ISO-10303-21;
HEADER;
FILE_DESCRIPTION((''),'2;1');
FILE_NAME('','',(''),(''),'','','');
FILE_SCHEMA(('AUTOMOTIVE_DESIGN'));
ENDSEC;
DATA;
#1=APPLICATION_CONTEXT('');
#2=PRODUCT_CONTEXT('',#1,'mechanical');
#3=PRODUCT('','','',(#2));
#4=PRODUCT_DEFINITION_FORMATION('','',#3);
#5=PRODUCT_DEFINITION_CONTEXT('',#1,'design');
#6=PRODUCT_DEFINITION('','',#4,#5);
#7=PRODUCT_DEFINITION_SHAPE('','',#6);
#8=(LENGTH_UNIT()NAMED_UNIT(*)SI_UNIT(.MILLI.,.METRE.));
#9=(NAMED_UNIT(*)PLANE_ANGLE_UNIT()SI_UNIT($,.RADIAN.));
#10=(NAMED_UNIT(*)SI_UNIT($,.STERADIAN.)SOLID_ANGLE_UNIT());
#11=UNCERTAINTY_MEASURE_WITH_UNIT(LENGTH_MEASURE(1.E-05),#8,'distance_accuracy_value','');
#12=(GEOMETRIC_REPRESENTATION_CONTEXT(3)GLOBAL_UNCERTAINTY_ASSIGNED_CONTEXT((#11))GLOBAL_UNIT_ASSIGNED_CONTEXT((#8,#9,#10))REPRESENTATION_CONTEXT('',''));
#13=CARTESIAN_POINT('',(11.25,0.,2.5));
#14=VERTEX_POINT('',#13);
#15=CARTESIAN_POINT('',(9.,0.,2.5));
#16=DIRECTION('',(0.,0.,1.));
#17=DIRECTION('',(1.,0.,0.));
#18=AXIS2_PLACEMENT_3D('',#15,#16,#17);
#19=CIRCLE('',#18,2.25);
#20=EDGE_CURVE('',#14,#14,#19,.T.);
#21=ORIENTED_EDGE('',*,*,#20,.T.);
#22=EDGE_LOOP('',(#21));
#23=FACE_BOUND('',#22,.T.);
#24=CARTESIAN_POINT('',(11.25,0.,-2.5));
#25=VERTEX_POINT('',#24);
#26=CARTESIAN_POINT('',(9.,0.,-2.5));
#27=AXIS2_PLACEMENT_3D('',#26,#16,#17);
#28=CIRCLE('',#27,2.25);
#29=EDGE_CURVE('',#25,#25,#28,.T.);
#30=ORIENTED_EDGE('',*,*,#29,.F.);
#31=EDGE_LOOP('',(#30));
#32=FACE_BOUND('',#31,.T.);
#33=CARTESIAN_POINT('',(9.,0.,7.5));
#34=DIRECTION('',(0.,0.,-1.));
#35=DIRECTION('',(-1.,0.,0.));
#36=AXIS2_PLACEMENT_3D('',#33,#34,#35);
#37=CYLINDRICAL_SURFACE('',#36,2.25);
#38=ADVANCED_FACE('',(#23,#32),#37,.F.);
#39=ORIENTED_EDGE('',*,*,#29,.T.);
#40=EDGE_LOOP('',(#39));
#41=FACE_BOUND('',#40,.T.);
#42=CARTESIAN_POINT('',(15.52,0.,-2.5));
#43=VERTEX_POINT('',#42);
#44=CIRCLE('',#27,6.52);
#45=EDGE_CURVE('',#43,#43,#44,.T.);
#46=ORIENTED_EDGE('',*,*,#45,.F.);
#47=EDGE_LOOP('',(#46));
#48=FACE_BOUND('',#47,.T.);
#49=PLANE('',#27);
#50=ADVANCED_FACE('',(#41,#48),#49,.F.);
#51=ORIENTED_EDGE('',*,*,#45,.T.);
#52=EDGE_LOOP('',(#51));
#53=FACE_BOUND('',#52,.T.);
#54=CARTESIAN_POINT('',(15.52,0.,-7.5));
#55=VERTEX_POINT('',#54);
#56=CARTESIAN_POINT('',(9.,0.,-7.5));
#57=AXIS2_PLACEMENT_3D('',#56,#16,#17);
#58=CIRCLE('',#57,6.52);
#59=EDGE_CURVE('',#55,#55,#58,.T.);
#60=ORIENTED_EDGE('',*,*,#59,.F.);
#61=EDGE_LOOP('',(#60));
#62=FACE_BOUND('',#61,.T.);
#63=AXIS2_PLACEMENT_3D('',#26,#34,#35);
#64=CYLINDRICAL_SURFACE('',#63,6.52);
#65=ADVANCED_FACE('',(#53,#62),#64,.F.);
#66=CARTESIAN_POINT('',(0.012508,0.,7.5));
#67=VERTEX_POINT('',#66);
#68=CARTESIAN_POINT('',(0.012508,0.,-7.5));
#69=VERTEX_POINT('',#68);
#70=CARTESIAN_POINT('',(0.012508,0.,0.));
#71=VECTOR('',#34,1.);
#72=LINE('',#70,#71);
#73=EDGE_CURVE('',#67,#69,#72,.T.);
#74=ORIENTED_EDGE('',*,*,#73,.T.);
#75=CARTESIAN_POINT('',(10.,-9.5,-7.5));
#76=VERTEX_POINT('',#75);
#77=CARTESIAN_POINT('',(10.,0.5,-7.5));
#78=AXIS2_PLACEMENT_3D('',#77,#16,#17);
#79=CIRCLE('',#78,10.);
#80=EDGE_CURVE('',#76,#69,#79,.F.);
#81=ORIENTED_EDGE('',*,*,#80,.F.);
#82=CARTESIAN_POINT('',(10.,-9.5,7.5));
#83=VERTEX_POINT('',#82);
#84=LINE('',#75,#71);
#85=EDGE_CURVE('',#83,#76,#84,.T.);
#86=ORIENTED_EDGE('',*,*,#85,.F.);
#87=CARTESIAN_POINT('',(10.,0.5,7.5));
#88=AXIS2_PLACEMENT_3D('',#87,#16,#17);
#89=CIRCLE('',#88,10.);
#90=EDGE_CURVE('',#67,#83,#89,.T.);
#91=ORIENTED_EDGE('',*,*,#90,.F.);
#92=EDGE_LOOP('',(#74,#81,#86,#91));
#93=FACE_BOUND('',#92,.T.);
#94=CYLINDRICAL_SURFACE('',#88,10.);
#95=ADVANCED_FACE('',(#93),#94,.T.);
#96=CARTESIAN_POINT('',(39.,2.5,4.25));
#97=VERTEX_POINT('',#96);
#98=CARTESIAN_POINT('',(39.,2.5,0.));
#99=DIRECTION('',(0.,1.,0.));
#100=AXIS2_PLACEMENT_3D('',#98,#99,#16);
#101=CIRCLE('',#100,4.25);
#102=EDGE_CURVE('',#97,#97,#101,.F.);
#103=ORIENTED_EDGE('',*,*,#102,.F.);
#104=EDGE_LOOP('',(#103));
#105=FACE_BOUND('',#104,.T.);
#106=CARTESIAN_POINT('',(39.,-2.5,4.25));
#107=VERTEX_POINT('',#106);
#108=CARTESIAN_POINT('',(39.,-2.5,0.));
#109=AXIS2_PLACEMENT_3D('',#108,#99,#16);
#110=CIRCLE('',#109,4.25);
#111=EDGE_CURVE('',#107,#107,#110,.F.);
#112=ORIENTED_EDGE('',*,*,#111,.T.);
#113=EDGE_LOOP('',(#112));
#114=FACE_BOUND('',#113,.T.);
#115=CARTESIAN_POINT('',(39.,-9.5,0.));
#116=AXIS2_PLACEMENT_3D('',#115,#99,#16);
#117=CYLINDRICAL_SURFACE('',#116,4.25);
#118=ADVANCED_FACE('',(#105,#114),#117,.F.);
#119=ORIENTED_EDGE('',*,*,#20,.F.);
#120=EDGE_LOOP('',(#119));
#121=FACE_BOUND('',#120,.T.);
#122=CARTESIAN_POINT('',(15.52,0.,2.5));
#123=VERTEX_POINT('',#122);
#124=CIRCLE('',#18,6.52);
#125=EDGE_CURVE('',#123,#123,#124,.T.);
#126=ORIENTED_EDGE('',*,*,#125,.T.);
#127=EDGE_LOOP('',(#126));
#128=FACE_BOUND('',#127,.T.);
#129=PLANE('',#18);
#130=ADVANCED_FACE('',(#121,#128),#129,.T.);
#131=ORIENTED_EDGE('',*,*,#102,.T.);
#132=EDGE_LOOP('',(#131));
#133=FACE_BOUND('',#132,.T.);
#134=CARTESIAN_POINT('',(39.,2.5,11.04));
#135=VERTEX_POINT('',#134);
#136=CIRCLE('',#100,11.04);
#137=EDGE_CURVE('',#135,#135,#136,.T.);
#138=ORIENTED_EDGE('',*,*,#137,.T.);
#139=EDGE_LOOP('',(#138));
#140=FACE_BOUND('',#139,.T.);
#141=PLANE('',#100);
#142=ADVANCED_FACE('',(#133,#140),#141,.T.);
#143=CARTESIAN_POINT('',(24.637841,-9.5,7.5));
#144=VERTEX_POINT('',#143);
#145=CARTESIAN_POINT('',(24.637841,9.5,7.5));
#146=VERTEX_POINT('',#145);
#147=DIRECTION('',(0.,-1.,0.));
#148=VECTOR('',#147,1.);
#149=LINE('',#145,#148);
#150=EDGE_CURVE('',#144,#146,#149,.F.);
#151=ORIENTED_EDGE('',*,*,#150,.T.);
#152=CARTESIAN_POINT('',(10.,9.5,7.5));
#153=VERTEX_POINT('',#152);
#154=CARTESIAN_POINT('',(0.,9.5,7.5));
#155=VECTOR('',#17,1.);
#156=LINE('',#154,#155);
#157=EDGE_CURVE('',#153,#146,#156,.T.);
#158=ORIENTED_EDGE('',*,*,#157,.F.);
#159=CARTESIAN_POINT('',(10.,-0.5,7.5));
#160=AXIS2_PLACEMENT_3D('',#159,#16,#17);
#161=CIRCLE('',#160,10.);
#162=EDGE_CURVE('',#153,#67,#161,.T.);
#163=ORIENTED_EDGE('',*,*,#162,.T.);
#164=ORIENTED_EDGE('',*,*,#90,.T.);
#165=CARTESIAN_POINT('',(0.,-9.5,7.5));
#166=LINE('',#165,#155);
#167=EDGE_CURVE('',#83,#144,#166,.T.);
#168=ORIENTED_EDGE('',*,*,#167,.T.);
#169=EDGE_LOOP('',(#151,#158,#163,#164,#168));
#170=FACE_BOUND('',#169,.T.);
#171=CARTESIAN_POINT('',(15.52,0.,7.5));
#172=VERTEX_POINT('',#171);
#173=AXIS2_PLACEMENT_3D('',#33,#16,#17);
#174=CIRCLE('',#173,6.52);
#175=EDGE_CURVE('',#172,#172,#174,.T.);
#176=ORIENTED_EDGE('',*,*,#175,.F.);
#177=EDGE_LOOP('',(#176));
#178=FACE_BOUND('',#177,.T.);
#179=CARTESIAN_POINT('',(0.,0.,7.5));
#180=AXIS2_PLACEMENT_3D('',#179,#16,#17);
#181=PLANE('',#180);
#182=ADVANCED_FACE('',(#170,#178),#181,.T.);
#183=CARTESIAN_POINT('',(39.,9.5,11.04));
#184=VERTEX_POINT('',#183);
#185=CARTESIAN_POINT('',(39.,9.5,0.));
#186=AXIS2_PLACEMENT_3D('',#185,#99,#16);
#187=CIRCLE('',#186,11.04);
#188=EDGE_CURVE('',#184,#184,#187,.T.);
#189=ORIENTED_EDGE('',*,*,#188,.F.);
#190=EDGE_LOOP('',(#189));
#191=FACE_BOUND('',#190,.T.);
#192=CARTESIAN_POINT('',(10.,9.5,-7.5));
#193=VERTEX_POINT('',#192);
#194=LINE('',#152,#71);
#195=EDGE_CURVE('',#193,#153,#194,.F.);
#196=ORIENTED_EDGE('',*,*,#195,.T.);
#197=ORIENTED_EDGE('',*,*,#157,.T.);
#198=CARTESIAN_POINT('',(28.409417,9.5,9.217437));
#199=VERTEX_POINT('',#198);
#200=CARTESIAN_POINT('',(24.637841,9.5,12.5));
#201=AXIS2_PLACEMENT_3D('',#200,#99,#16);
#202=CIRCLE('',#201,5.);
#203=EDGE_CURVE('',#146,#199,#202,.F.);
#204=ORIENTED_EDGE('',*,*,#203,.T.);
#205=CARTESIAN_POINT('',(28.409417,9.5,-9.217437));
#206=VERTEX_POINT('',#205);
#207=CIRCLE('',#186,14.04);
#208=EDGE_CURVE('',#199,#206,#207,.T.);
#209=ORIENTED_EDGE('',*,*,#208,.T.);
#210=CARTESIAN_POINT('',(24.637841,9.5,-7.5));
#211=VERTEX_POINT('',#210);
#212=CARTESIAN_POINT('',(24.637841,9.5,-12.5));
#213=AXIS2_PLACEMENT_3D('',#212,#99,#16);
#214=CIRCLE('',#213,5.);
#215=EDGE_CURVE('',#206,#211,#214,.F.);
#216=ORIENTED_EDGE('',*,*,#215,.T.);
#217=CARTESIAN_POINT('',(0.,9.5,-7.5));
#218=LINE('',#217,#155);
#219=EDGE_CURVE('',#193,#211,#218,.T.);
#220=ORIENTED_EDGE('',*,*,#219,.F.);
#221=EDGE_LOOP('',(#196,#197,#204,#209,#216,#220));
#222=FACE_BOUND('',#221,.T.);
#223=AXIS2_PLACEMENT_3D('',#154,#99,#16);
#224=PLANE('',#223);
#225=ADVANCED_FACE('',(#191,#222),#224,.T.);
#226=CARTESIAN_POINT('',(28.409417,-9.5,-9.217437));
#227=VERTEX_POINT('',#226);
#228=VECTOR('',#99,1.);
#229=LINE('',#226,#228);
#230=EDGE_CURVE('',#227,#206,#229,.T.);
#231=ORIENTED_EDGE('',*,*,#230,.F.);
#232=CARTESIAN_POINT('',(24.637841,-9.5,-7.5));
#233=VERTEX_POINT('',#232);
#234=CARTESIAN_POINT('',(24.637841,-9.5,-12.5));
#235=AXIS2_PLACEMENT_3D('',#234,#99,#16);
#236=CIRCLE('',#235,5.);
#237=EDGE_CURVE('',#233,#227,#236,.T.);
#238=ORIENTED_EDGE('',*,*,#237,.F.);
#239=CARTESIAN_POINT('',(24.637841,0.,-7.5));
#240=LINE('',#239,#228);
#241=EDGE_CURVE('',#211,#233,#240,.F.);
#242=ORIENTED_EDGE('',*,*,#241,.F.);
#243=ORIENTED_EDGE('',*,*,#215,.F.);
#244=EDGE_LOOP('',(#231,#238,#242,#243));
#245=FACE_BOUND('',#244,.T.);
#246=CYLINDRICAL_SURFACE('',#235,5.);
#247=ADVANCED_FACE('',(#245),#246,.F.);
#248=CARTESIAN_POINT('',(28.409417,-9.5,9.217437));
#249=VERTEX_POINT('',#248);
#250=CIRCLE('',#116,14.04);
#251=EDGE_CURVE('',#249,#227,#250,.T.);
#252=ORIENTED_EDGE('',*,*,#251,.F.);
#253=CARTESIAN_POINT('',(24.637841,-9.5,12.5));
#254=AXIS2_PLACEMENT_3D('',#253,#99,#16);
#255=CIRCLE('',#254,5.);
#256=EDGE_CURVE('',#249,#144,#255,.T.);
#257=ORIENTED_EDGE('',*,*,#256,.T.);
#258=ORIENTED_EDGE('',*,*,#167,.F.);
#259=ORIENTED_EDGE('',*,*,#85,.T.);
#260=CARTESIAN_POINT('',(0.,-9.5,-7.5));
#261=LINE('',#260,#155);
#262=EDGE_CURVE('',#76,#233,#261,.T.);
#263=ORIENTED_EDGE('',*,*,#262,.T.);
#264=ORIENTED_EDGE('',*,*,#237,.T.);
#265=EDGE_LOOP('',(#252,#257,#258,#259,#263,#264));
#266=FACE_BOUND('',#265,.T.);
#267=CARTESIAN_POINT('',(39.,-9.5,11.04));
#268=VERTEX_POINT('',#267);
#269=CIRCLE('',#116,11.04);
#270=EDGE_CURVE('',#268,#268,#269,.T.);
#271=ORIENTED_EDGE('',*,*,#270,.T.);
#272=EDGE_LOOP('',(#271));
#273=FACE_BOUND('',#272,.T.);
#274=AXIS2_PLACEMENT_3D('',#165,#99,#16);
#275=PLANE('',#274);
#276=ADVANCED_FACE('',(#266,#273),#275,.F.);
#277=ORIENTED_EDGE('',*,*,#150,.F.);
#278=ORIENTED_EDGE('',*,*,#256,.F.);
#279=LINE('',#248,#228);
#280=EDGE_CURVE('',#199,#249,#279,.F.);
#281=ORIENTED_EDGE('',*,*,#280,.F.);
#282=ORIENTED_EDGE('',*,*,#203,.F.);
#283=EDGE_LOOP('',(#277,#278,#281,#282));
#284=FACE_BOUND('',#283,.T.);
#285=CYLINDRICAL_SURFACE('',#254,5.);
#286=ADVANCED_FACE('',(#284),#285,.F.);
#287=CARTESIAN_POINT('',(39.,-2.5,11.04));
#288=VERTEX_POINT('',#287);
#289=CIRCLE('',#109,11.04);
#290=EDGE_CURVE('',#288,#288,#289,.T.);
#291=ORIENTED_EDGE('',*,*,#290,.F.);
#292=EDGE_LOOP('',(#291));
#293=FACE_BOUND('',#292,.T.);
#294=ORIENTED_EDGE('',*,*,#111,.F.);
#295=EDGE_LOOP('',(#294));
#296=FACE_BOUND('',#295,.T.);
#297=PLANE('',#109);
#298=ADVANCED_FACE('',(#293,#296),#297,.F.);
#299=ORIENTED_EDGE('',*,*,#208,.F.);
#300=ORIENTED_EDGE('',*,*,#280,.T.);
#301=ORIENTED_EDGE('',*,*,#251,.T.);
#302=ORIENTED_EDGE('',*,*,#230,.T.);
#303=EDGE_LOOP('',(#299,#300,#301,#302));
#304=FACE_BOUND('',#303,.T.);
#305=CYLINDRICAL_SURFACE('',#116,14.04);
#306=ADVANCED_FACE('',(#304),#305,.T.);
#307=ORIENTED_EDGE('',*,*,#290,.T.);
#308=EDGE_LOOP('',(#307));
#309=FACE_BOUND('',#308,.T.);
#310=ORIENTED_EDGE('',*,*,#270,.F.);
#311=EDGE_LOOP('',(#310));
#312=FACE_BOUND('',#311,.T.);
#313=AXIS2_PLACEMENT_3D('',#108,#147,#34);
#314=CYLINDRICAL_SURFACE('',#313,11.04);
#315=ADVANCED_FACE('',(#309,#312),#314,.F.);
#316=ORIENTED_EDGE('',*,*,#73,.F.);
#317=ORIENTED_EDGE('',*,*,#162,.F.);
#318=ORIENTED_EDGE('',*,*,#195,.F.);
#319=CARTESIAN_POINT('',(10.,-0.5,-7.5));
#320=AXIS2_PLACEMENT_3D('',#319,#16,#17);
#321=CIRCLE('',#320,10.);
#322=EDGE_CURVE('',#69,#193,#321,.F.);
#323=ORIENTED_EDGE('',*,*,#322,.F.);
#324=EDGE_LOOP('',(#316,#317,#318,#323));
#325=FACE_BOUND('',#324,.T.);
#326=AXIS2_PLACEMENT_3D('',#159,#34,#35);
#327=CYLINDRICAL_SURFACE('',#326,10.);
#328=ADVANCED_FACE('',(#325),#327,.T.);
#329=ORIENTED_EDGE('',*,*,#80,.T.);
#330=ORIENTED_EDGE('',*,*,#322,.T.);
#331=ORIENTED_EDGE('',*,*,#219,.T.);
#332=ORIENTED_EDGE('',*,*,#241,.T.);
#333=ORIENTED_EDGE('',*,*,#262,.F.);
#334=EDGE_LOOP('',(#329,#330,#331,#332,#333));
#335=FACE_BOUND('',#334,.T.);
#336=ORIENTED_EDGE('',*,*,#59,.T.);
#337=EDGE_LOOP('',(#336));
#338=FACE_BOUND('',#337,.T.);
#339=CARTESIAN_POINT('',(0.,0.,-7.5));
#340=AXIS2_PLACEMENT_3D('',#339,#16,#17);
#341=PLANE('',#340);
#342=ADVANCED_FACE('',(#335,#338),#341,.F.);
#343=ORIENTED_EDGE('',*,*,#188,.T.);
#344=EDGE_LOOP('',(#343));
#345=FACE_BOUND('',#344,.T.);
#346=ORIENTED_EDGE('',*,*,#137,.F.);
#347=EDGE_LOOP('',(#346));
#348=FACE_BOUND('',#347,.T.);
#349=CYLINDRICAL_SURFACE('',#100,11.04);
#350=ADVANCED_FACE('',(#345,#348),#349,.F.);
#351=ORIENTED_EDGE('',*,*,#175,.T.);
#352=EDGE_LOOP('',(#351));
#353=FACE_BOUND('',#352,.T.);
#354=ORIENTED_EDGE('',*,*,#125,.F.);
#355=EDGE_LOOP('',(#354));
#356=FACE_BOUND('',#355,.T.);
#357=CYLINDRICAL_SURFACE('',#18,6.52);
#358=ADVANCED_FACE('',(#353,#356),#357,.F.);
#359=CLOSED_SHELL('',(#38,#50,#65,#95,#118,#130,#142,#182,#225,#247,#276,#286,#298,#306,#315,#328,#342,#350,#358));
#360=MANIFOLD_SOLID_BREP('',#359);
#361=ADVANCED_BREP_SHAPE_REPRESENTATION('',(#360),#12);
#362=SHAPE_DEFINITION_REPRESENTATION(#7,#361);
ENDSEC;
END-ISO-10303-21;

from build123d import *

# Parameters (mm, degrees)
BOSS_EXTRUDE1_DEPTH        = 7.5
CORTAR_EXTRUIR1_START      = 7.5
SKETCH1_3_R                = 6.52
CORTAR_EXTRUIR1_DEPTH      = 5
CORTAR_EXTRUIR2_START      = -7.5
SKETCH1_5_R                = 6.52
CORTAR_EXTRUIR2_DEPTH      = 5
BOSS_EXTRUDE3_DEPTH        = 9.5
BOSS_EXTRUDE3_DEPTH_BACK   = 9.5
SKETCH2_R                  = 14.04
SKETCH2_R_2                = 4.25
CORTAR_EXTRUIR3_START      = -9.5
SKETCH2_4_R                = 11.04
CORTAR_EXTRUIR3_DEPTH      = 7
CORTAR_EXTRUIR4_START      = 2.5
SKETCH2_5_R                = 11.04
CORTAR_EXTRUIR4_DEPTH      = 7
CORTAR_EXTRUIR5_DEPTH      = 56.683150055
CORTAR_EXTRUIR5_DEPTH_BACK = 56.683150055
SKETCH2_6_R                = 4.25
FILLET1_R                  = 5
FILLET2_R                  = 10


with BuildPart() as part:
    # Sketch1 → Boss-Extrude1 (new, symmetric)
    with BuildSketch(Plane.XY):
        with BuildLine():
            ThreePointArc((6.75, 0), (9, 2.25), (11.25, 0))
            Line((11.25, 0), (15.52, 0))
            ThreePointArc((15.52, 0), (9, 6.52), (2.48, 0))
            Line((2.48, 0), (6.75, 0))
        make_face()
        with BuildLine():
            Line((15.52, 0), (11.25, 0))
            ThreePointArc((11.25, 0), (9, -2.25), (6.75, 0))
            Line((6.75, 0), (2.48, 0))
            ThreePointArc((2.48, 0), (9, -6.52), (15.52, 0))
        make_face()
        with BuildLine():
            ThreePointArc((2.48, 0), (9, 6.52), (15.52, 0))
            Line((15.52, 0), (39, 0))
            Line((39, 0), (39, 9.5))
            Line((39, 9.5), (0, 9.5))
            Line((0, 9.5), (0, 0))
            Line((0, 0), (2.48, 0))
        make_face()
        with BuildLine():
            Line((39, 0), (15.52, 0))
            ThreePointArc((15.52, 0), (9, -6.52), (2.48, 0))
            Line((2.48, 0), (0, 0))
            Line((0, 0), (0, -9.5))
            Line((0, -9.5), (39, -9.5))
            Line((39, -9.5), (39, 0))
        make_face()
    extrude(amount=BOSS_EXTRUDE1_DEPTH, both=True)

    # Sketch1<3> → Cortar-Extruir1 (cut)
    with BuildSketch(Plane.XY.offset(CORTAR_EXTRUIR1_START)):
        with Locations((9, 0)):
            Circle(SKETCH1_3_R)
    extrude(amount=-CORTAR_EXTRUIR1_DEPTH, mode=Mode.SUBTRACT)

    # Sketch1<5> → Cortar-Extruir2 (cut)
    with BuildSketch(Plane.XY.offset(CORTAR_EXTRUIR2_START)):
        with Locations((9, 0)):
            Circle(SKETCH1_5_R)
    extrude(amount=CORTAR_EXTRUIR2_DEPTH, mode=Mode.SUBTRACT)

    # Sketch2 → Boss-Extrude3 (add, two sides: drawn at the far end of the back side and taken through both)
    with BuildSketch(Plane(origin=(0, 0, 0), x_dir=(1, 0, 0), z_dir=(0, 1, 0)).offset(-BOSS_EXTRUDE3_DEPTH_BACK)):
        with Locations((39, 0)):
            Circle(SKETCH2_R)
        with Locations((39, 0)):
            Circle(SKETCH2_R_2, mode=Mode.SUBTRACT)
    extrude(amount=BOSS_EXTRUDE3_DEPTH + BOSS_EXTRUDE3_DEPTH_BACK)

    # Sketch2<4> → Cortar-Extruir3 (cut)
    with BuildSketch(Plane(origin=(0, 0, 0), x_dir=(1, 0, 0), z_dir=(0, 1, 0)).offset(CORTAR_EXTRUIR3_START)):
        with Locations(Location((39, 0, 0), (0, 0, 270))):
            Circle(SKETCH2_4_R)
    extrude(amount=CORTAR_EXTRUIR3_DEPTH, mode=Mode.SUBTRACT)

    # Sketch2<5> → Cortar-Extruir4 (cut)
    with BuildSketch(Plane(origin=(0, 0, 0), x_dir=(1, 0, 0), z_dir=(0, 1, 0)).offset(CORTAR_EXTRUIR4_START)):
        with Locations(Location((39, 0, 0), (0, 0, 270))):
            Circle(SKETCH2_5_R)
    extrude(amount=CORTAR_EXTRUIR4_DEPTH, mode=Mode.SUBTRACT)

    # Sketch2<6> → Cortar-Extruir5 (cut, two sides: drawn at the far end of the back side and taken through both)
    with BuildSketch(Plane(origin=(0, 0, 0), x_dir=(1, 0, 0), z_dir=(0, 1, 0)).offset(-CORTAR_EXTRUIR5_DEPTH_BACK)):
        with Locations(Location((39, 0, 0), (0, 0, 270))):
            Circle(SKETCH2_6_R)
    extrude(amount=CORTAR_EXTRUIR5_DEPTH + CORTAR_EXTRUIR5_DEPTH_BACK, mode=Mode.SUBTRACT)

    # Fillet1
    fillet1_edges = [part.edges().sort_by_distance(p)[0] for p in [
        (27.13106576, 0, -7.5),
        (27.13106576, 0, 7.5),
    ]]
    fillet(fillet1_edges, radius=FILLET1_R)

    # Fillet2
    # the kernel refuses this fillet: 10 mm, written as the material it takes off along each edge
    with BuildSketch(Plane(origin=(0, -9.5, 32.5), x_dir=(1, 0, 0), z_dir=(0, 0, -1)), Plane(origin=(0, 9.5, 32.5), x_dir=(0, -1, 0), z_dir=(0, 0, -1))) as fillet2_piece_1:
        with BuildLine():
            CenterArc((FILLET2_R, -FILLET2_R), FILLET2_R, 90, 90)
            Line((0, -FILLET2_R), (0, 0))
            Line((0, 0), (FILLET2_R, 0))
        make_face()
    extrude(amount=65, mode=Mode.SUBTRACT)


solid = part.part
